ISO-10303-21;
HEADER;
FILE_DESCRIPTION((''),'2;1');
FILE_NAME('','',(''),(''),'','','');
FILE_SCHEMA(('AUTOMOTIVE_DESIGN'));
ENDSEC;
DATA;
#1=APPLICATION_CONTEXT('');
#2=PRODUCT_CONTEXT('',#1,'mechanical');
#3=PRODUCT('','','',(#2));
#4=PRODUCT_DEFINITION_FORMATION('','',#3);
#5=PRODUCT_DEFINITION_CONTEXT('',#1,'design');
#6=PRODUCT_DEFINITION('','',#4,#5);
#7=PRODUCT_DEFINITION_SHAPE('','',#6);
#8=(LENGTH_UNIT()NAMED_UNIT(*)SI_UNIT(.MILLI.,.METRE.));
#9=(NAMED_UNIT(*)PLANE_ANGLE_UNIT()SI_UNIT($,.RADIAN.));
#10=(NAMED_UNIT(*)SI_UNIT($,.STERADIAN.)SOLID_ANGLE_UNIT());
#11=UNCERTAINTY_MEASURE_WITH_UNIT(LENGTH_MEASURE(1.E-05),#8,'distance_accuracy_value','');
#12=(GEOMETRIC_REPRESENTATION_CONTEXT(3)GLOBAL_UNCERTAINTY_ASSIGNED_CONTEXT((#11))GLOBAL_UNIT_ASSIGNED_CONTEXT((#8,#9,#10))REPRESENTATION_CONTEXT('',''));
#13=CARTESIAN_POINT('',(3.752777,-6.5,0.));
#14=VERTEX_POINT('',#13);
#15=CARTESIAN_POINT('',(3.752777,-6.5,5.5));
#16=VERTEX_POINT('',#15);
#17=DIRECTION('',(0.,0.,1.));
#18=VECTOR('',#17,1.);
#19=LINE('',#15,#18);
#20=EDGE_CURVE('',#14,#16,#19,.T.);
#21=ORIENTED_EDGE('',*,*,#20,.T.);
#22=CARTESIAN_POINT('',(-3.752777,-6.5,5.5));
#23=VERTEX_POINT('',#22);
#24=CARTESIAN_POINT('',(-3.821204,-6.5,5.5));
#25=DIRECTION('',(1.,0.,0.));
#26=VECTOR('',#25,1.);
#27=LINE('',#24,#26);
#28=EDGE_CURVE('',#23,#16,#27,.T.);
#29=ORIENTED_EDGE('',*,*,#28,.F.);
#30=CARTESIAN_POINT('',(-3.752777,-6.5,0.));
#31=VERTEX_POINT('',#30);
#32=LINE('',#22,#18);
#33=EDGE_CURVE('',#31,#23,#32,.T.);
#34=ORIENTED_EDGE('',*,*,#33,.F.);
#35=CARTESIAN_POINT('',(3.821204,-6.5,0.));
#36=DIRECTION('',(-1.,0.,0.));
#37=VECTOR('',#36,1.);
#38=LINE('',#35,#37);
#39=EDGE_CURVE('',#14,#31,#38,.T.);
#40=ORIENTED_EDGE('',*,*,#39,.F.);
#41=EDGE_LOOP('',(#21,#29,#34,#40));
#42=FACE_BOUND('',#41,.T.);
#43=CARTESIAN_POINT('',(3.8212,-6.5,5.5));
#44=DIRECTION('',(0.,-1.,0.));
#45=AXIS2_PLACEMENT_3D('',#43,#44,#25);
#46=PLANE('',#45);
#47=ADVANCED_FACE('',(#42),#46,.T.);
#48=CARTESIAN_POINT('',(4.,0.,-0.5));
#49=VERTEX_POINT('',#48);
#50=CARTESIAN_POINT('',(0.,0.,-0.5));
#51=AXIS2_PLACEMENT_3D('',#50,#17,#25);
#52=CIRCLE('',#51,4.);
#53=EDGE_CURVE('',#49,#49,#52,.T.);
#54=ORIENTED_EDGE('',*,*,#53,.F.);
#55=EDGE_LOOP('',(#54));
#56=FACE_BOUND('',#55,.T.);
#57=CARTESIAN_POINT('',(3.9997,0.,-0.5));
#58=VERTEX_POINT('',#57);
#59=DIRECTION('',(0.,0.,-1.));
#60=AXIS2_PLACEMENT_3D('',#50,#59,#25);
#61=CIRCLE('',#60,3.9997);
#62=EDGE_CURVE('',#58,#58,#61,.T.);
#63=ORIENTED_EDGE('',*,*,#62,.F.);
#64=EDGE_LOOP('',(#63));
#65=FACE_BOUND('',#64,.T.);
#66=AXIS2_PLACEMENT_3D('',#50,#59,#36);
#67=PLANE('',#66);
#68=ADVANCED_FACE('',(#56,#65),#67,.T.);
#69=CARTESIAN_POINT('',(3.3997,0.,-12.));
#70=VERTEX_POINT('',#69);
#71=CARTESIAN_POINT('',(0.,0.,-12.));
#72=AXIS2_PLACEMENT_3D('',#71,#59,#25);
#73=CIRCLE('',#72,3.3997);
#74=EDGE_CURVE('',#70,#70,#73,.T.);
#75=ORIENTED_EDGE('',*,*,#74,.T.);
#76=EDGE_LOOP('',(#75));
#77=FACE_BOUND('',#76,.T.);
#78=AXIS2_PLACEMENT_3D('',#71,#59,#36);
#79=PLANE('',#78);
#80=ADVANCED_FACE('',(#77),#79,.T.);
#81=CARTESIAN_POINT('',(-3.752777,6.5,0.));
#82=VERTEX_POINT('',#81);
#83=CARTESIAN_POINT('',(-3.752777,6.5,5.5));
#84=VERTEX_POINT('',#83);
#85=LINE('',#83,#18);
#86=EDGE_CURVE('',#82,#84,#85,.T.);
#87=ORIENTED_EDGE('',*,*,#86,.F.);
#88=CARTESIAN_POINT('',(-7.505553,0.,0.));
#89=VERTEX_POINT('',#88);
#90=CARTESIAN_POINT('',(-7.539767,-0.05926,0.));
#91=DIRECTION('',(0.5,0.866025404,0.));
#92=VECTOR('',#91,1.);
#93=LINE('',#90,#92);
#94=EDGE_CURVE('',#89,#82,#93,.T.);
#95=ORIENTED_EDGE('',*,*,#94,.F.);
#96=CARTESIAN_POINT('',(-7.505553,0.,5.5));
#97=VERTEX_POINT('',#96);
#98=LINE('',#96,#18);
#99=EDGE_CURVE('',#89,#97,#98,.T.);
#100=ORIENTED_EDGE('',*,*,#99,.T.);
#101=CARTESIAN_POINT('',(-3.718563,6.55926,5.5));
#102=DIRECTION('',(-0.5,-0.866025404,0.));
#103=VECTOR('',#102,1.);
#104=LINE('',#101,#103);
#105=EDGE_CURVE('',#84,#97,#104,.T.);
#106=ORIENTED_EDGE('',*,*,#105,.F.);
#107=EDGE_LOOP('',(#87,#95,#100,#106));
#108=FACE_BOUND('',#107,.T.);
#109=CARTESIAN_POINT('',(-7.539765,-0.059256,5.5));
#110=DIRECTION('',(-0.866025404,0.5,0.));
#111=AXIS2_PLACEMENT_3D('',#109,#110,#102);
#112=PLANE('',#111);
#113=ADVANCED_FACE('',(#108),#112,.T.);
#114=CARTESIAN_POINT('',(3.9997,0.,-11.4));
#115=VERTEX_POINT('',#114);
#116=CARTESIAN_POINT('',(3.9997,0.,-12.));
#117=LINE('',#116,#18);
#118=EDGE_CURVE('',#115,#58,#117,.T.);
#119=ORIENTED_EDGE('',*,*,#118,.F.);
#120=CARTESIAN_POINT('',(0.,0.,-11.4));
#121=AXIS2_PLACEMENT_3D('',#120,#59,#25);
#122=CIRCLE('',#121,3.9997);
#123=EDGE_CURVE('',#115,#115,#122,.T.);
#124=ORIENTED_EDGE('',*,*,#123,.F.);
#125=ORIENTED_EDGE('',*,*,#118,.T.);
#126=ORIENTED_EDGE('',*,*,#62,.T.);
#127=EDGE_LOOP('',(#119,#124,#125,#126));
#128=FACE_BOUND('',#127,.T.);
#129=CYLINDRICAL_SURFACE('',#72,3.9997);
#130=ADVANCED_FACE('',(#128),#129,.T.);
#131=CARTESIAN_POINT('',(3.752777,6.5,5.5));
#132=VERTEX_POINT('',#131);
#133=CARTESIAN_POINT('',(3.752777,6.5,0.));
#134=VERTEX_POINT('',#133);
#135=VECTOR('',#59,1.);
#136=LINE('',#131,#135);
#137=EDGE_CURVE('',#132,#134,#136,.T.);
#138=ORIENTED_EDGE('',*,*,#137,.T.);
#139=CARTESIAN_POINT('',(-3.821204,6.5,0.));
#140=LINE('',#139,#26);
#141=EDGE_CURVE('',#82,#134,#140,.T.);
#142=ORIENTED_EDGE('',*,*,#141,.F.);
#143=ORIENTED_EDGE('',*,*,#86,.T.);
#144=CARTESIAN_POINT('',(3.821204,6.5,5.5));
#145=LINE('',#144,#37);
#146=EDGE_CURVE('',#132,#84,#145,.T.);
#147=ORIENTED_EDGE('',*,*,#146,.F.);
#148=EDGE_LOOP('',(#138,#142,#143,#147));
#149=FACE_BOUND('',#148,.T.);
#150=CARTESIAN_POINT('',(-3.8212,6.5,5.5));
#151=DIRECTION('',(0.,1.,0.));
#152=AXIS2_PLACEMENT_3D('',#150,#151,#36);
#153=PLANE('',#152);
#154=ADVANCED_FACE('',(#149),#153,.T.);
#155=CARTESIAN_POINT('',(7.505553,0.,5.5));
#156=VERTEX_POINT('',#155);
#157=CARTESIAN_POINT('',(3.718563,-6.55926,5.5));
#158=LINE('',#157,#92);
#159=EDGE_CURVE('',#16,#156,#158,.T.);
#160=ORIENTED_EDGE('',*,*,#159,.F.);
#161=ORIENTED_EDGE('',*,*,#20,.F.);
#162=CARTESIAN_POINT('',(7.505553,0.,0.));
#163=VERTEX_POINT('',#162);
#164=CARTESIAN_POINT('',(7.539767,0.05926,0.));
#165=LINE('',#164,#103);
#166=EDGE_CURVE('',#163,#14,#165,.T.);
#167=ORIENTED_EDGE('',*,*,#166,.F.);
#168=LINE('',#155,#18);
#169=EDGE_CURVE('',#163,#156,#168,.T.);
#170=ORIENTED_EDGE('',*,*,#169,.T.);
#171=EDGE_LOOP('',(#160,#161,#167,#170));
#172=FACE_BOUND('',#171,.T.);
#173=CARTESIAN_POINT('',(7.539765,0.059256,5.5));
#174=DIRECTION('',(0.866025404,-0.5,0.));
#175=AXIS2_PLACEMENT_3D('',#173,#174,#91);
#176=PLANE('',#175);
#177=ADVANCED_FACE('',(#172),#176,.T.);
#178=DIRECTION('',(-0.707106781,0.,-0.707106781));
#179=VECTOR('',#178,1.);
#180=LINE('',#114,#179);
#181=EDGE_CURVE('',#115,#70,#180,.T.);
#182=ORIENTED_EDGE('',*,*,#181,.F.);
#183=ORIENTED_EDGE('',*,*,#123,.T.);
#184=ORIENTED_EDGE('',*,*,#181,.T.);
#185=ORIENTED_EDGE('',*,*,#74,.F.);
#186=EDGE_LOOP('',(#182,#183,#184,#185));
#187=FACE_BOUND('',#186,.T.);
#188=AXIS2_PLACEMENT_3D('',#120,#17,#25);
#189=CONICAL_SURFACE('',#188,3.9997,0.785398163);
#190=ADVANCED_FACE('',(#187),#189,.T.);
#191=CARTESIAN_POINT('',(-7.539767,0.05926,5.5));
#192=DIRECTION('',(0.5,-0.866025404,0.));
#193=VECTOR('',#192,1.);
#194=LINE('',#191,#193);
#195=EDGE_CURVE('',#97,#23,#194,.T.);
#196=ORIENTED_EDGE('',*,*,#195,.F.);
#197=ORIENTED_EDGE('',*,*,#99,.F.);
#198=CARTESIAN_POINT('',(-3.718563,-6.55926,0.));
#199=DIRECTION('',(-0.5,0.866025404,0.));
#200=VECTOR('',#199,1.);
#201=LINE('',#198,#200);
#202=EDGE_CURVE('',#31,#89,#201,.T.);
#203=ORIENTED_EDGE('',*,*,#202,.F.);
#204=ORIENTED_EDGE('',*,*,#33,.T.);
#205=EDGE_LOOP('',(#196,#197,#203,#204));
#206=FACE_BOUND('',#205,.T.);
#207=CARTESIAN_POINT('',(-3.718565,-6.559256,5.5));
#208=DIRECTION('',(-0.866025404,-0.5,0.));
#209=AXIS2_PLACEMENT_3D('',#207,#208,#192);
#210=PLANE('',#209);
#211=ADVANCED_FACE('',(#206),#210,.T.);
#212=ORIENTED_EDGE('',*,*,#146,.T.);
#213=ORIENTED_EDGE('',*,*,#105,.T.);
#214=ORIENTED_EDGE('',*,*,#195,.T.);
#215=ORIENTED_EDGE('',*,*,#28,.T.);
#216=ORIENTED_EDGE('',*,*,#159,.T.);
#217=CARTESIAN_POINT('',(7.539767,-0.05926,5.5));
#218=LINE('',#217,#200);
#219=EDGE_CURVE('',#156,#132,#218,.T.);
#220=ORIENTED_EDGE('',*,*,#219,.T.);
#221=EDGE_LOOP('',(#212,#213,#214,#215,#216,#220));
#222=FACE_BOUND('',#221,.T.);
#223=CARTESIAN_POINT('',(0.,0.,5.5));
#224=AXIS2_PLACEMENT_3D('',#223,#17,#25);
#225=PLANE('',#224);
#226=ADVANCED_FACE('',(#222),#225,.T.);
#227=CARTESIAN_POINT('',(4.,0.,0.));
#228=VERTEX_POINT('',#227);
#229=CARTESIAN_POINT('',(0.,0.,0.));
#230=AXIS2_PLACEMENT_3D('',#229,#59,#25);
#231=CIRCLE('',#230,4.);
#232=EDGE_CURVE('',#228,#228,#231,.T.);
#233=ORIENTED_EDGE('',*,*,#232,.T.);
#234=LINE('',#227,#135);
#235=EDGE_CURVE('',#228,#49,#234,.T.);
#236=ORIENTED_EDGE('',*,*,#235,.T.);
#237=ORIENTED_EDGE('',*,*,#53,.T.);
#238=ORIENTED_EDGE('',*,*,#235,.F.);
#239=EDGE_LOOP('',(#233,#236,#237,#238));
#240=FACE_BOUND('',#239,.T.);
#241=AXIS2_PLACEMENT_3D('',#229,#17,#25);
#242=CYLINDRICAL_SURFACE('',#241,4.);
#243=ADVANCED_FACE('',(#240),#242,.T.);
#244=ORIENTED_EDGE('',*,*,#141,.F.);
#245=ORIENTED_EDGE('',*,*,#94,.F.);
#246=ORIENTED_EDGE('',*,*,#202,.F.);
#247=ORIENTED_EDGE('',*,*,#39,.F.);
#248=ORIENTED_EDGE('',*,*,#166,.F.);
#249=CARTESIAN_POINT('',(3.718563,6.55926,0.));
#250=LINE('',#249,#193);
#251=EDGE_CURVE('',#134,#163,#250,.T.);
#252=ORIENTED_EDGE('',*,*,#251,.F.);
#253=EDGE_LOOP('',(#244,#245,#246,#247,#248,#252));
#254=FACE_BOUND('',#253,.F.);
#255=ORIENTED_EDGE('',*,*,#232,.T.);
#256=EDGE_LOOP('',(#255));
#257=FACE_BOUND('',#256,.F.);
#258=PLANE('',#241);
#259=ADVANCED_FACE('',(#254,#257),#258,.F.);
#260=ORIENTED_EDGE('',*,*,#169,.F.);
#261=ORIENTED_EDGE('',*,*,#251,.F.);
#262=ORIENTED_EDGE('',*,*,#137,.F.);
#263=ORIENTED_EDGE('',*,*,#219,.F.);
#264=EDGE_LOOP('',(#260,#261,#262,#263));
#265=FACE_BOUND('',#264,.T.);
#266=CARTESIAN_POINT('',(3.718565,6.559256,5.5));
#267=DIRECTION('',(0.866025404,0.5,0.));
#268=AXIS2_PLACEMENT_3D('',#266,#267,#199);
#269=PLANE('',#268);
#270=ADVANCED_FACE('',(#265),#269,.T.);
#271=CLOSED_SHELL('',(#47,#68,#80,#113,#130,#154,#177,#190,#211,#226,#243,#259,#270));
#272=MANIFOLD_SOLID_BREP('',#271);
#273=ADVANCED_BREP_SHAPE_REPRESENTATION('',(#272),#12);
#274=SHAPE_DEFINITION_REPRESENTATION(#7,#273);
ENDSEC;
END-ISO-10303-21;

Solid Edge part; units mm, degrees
sketch "Sketch1" plane through (0, 0, 0) normal (0, 0, 1) x (1, 0, 0)
  circle A0 centre (0, 0) radius 7.54
  dimension "D1" = 15.08
extrude "Protrusion1" add sketch "Sketch1" along normal blind 5.5
sketch "Sketch2" plane through (0, 0, 0) normal (0, 0, -1) x (1, 0, 0)
  circle A0 centre (0, 0) radius 4
extrude "Protrusion2" add sketch "Sketch2" along normal blind 12
sketch "Sketch3" plane through (0, 0, -12) normal (0, 0, -1) x (1, 0, 0)
  circle A0 centre (0, 0) radius 3.9997
extrude "Cutout1" cut sketch "Sketch3" against normal blind 11.5 flip side to cut
chamfer "Chamfer_1" distance 0.6 angle 45 1 edges at (-3.9997, 0, -12)
sketch "Sketch4" plane through (0, 0, 5.5) normal (0, 0, 1) x (1, 0, 0)
  line L0 (-3.8212, 6.5) -> (3.8212, 6.5)
  dimension "D1" = 13
extrude "Cutout2" cut sketch "Sketch4" against normal up to next material side at (0, 6.55, 5.5)
pattern_circular "Pattern1" count 6 over 360 about axis through (0, 0, 5.5) along (0, 0, 1) of "Cutout2"
properties part number "24101263"
